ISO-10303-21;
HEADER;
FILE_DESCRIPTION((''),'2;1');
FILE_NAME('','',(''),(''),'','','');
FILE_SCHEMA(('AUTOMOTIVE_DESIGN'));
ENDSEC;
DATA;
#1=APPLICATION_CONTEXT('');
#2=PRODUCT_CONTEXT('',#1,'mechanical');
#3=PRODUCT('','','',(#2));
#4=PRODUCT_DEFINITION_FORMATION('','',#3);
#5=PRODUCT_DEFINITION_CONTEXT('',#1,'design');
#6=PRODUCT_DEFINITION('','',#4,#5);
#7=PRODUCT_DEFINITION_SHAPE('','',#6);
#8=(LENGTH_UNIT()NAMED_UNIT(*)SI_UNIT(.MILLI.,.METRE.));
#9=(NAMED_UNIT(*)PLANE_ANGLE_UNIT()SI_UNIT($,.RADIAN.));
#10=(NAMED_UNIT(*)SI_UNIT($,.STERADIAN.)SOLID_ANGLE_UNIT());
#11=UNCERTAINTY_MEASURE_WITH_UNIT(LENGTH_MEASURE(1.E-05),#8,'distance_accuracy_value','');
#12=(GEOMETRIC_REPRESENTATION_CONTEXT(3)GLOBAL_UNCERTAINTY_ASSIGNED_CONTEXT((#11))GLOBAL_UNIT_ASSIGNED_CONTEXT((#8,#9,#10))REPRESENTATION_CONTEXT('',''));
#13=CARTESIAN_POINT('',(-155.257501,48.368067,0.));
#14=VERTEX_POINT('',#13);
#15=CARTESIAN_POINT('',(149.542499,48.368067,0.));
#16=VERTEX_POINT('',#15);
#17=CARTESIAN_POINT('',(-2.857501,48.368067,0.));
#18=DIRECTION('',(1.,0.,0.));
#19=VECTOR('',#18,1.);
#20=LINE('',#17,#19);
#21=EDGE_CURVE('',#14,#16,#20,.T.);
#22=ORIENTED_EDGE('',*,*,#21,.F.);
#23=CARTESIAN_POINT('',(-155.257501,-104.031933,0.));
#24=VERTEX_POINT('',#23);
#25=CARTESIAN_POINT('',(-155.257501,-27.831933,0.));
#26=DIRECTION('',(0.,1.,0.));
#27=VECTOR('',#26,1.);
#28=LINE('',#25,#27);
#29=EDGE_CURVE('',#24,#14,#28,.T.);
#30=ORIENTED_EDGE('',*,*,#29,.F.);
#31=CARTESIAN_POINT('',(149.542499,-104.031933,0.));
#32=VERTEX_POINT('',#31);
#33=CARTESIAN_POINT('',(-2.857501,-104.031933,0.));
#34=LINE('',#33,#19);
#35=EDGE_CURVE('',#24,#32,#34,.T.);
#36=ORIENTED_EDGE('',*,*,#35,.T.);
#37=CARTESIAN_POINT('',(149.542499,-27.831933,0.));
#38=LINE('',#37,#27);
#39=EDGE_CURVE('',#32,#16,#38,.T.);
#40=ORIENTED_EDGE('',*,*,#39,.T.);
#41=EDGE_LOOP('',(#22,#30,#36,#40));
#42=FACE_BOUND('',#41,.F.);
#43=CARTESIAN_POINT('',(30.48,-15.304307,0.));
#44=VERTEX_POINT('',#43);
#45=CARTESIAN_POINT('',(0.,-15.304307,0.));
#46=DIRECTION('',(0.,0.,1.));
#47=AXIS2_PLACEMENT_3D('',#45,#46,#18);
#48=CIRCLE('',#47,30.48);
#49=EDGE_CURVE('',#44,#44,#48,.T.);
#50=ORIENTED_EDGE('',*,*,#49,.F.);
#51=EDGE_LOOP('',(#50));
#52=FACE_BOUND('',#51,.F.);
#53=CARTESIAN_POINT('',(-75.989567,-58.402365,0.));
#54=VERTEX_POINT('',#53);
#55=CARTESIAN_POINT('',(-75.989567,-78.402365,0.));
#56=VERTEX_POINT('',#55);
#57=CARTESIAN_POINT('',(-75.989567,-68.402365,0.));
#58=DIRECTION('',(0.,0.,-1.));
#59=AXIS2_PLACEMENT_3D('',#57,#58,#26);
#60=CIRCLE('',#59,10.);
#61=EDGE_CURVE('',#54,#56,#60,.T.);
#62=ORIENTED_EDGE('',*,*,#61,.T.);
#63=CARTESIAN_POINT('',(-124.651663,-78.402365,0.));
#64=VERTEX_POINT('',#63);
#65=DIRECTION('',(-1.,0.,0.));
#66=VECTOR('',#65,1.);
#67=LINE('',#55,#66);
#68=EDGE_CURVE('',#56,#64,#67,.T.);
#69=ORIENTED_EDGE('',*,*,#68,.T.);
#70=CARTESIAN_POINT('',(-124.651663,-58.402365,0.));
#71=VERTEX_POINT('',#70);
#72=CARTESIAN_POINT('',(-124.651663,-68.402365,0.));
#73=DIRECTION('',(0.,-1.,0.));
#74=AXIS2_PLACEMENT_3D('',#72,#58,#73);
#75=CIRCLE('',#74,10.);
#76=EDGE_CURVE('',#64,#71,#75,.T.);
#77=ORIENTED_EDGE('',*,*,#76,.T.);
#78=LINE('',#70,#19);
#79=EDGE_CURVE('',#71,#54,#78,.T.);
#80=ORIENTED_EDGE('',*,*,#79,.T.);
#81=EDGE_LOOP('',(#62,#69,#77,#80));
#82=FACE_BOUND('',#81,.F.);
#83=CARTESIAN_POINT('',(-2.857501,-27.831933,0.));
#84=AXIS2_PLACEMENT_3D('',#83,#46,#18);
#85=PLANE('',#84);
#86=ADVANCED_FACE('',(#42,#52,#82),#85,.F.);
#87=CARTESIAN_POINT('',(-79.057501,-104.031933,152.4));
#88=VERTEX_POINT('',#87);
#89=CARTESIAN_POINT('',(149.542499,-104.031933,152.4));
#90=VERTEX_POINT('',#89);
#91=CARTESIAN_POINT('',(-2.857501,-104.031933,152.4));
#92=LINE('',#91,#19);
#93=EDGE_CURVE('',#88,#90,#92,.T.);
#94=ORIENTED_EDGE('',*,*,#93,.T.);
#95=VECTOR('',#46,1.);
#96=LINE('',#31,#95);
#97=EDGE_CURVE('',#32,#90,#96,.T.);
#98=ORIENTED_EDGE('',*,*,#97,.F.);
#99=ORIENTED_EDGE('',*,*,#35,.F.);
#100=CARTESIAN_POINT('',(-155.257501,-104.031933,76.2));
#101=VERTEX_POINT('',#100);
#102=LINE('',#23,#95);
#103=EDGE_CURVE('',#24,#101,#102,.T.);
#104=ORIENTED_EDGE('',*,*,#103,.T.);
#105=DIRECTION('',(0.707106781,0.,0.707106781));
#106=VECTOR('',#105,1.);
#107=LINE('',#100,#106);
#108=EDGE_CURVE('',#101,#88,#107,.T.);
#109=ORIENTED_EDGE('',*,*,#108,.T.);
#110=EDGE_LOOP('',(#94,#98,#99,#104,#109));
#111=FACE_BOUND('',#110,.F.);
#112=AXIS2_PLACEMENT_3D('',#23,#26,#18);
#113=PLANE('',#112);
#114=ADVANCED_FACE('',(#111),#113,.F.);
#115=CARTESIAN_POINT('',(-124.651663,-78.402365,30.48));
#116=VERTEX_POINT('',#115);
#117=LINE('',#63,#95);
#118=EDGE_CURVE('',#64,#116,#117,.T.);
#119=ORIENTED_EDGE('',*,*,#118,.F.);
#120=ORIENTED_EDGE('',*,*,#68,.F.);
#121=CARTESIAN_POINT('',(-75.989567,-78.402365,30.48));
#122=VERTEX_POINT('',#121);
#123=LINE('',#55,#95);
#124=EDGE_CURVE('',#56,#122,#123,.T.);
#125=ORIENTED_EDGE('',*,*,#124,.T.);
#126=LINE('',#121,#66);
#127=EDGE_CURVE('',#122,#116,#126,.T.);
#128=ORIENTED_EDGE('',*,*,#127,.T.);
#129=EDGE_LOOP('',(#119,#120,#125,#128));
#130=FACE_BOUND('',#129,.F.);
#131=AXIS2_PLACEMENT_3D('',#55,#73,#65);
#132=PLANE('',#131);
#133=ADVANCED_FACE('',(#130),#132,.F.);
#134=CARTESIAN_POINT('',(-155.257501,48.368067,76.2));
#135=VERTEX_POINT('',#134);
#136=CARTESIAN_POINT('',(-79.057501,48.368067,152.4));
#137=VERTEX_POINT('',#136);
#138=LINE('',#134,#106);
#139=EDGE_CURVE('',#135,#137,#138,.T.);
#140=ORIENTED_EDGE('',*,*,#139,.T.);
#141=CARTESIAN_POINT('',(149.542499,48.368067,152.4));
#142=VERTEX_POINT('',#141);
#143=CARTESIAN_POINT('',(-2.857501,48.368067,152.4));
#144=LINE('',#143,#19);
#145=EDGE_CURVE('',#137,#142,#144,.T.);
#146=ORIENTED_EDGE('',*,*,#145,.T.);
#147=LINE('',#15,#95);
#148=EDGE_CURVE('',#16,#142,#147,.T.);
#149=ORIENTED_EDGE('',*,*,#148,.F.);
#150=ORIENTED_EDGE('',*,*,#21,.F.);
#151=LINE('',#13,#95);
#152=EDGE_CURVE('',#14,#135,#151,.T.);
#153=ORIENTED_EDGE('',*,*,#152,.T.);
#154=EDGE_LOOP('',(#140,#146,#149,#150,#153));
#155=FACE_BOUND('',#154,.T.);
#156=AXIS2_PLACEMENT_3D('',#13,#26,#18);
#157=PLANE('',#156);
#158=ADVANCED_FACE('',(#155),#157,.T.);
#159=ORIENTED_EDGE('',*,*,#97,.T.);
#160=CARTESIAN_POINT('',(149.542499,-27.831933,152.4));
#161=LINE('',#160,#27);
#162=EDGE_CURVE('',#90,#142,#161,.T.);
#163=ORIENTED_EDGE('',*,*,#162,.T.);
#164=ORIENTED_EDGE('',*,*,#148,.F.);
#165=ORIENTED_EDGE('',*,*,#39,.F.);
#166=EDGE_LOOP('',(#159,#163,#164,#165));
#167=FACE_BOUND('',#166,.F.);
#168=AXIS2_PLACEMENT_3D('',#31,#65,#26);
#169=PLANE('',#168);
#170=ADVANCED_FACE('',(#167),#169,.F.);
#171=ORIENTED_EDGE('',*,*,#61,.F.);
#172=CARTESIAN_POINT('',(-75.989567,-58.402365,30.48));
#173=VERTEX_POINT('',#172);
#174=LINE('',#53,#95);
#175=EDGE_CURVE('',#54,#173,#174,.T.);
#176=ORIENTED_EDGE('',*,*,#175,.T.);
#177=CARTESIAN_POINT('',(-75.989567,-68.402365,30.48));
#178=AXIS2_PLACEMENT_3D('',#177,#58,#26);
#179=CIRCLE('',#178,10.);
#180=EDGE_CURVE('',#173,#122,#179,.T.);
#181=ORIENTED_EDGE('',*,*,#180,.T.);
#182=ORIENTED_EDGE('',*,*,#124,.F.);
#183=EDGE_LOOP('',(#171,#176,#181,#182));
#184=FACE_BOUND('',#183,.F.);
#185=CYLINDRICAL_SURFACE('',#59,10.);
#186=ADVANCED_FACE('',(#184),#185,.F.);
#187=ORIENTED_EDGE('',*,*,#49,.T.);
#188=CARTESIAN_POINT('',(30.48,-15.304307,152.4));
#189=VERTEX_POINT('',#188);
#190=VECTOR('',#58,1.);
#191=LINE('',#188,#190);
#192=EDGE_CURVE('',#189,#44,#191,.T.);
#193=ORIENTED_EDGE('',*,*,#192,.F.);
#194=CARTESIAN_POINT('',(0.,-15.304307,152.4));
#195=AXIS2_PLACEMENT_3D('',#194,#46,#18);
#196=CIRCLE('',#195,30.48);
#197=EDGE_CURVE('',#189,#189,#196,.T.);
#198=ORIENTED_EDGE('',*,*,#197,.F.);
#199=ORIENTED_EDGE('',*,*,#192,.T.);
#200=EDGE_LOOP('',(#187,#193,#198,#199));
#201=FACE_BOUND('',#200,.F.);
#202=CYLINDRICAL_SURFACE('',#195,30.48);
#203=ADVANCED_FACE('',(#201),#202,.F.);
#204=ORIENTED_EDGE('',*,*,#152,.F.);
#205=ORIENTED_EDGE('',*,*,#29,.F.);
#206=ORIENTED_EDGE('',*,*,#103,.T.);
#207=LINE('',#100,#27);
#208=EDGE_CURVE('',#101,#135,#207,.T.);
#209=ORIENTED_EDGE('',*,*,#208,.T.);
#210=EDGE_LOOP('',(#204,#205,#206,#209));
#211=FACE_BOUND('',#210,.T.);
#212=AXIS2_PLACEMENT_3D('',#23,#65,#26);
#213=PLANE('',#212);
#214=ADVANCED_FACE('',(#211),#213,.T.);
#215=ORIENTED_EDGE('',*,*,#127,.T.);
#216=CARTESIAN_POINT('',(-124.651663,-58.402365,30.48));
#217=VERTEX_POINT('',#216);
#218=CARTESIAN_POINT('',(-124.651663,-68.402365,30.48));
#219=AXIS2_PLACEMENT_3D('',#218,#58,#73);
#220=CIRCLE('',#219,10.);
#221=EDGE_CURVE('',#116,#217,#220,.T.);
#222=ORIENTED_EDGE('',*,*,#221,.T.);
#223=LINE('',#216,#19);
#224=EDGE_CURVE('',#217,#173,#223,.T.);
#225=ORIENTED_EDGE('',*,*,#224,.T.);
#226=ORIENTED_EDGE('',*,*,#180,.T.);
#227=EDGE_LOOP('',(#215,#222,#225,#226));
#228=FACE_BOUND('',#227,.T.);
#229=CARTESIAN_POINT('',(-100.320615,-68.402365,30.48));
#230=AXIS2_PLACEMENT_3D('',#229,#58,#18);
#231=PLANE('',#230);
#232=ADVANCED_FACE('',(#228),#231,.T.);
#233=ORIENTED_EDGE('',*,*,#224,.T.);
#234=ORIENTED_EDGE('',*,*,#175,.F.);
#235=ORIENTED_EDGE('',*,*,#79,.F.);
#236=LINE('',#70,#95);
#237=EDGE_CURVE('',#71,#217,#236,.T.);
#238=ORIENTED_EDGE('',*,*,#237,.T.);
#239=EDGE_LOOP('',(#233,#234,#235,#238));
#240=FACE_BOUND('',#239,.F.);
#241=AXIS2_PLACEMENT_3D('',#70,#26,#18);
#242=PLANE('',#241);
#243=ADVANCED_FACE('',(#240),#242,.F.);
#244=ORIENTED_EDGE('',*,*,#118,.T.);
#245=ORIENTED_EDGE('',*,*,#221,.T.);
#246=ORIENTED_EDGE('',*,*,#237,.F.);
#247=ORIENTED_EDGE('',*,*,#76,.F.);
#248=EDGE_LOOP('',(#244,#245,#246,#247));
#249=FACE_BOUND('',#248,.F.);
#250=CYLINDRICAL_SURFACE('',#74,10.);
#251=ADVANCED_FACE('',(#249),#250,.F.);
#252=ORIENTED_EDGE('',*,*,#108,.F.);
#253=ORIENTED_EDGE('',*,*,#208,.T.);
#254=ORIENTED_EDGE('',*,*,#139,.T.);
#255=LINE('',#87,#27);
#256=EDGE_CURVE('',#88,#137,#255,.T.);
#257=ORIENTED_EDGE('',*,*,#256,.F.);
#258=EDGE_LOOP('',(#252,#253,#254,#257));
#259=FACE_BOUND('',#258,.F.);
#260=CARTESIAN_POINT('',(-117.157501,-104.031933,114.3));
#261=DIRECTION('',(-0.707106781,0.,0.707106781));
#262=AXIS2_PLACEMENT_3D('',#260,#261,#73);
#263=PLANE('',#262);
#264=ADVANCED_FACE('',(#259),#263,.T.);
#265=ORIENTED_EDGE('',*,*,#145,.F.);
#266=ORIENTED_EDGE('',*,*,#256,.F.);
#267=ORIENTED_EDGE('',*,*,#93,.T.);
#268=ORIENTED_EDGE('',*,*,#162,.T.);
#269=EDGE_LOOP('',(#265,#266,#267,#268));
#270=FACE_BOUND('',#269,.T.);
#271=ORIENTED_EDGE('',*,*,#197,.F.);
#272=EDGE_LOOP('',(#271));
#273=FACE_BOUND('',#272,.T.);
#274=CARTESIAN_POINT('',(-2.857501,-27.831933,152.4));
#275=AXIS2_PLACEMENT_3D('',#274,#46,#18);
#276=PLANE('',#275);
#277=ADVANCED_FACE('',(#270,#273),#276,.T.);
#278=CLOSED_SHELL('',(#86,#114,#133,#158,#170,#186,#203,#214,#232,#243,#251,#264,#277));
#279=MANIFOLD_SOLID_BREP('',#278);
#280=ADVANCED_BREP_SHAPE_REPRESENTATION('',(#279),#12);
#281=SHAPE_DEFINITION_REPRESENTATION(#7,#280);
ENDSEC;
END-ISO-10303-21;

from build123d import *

# Parameters (mm, degrees)
F0_W     = 304.8
F0_H     = 152.4
F1_DEPTH = 152.4
F9_R     = 30.48
F5_DEPTH = 152.401
F6_SIZE  = 76.2
F8_DEPTH = 30.48


# Not quite as in the source:
# - the program builds the solid bodies; features that only make, move or delete a surface that nothing else refers to are left out


with BuildPart() as f1:
    # F0 (on Top) → F1 (new body)
    with BuildSketch(Plane.XY):
        with Locations((-2.8575006872, -27.8319329938)):
            Rectangle(F0_W, F0_H)
    extrude(amount=F1_DEPTH)

    # F9 (on face) → F5 (cut, through all)
    with BuildSketch(Plane.XY.offset(152.4)):
        with Locations((0, -15.3043069538)):
            Circle(F9_R)
    extrude(amount=-F5_DEPTH, mode=Mode.SUBTRACT)

    # F6
    f6_edges = [f1.edges().sort_by_distance(p)[0] for p in [
        (-155.257501, -27.831933, 152.4),
    ]]
    chamfer(f6_edges, length=F6_SIZE)

    # F7 (on face) → F8 (cut)
    with BuildSketch(Plane(origin=(0, 0, 0), x_dir=(1, 0, 0), z_dir=(0, 0, -1))):
        with BuildLine():
            ThreePointArc((-124.6516630054, 78.40236485), (-134.6516630054, 68.40236485), (-124.6516630054, 58.40236485))
            Line((-124.6516630054, 58.40236485), (-75.9895667434, 58.40236485))
            ThreePointArc((-75.9895667434, 58.40236485), (-65.9895667434, 68.40236485), (-75.9895667434, 78.40236485))
            Line((-75.9895667434, 78.40236485), (-124.6516630054, 78.40236485))
        make_face()
    extrude(amount=-F8_DEPTH, mode=Mode.SUBTRACT)


solid = f1.part
